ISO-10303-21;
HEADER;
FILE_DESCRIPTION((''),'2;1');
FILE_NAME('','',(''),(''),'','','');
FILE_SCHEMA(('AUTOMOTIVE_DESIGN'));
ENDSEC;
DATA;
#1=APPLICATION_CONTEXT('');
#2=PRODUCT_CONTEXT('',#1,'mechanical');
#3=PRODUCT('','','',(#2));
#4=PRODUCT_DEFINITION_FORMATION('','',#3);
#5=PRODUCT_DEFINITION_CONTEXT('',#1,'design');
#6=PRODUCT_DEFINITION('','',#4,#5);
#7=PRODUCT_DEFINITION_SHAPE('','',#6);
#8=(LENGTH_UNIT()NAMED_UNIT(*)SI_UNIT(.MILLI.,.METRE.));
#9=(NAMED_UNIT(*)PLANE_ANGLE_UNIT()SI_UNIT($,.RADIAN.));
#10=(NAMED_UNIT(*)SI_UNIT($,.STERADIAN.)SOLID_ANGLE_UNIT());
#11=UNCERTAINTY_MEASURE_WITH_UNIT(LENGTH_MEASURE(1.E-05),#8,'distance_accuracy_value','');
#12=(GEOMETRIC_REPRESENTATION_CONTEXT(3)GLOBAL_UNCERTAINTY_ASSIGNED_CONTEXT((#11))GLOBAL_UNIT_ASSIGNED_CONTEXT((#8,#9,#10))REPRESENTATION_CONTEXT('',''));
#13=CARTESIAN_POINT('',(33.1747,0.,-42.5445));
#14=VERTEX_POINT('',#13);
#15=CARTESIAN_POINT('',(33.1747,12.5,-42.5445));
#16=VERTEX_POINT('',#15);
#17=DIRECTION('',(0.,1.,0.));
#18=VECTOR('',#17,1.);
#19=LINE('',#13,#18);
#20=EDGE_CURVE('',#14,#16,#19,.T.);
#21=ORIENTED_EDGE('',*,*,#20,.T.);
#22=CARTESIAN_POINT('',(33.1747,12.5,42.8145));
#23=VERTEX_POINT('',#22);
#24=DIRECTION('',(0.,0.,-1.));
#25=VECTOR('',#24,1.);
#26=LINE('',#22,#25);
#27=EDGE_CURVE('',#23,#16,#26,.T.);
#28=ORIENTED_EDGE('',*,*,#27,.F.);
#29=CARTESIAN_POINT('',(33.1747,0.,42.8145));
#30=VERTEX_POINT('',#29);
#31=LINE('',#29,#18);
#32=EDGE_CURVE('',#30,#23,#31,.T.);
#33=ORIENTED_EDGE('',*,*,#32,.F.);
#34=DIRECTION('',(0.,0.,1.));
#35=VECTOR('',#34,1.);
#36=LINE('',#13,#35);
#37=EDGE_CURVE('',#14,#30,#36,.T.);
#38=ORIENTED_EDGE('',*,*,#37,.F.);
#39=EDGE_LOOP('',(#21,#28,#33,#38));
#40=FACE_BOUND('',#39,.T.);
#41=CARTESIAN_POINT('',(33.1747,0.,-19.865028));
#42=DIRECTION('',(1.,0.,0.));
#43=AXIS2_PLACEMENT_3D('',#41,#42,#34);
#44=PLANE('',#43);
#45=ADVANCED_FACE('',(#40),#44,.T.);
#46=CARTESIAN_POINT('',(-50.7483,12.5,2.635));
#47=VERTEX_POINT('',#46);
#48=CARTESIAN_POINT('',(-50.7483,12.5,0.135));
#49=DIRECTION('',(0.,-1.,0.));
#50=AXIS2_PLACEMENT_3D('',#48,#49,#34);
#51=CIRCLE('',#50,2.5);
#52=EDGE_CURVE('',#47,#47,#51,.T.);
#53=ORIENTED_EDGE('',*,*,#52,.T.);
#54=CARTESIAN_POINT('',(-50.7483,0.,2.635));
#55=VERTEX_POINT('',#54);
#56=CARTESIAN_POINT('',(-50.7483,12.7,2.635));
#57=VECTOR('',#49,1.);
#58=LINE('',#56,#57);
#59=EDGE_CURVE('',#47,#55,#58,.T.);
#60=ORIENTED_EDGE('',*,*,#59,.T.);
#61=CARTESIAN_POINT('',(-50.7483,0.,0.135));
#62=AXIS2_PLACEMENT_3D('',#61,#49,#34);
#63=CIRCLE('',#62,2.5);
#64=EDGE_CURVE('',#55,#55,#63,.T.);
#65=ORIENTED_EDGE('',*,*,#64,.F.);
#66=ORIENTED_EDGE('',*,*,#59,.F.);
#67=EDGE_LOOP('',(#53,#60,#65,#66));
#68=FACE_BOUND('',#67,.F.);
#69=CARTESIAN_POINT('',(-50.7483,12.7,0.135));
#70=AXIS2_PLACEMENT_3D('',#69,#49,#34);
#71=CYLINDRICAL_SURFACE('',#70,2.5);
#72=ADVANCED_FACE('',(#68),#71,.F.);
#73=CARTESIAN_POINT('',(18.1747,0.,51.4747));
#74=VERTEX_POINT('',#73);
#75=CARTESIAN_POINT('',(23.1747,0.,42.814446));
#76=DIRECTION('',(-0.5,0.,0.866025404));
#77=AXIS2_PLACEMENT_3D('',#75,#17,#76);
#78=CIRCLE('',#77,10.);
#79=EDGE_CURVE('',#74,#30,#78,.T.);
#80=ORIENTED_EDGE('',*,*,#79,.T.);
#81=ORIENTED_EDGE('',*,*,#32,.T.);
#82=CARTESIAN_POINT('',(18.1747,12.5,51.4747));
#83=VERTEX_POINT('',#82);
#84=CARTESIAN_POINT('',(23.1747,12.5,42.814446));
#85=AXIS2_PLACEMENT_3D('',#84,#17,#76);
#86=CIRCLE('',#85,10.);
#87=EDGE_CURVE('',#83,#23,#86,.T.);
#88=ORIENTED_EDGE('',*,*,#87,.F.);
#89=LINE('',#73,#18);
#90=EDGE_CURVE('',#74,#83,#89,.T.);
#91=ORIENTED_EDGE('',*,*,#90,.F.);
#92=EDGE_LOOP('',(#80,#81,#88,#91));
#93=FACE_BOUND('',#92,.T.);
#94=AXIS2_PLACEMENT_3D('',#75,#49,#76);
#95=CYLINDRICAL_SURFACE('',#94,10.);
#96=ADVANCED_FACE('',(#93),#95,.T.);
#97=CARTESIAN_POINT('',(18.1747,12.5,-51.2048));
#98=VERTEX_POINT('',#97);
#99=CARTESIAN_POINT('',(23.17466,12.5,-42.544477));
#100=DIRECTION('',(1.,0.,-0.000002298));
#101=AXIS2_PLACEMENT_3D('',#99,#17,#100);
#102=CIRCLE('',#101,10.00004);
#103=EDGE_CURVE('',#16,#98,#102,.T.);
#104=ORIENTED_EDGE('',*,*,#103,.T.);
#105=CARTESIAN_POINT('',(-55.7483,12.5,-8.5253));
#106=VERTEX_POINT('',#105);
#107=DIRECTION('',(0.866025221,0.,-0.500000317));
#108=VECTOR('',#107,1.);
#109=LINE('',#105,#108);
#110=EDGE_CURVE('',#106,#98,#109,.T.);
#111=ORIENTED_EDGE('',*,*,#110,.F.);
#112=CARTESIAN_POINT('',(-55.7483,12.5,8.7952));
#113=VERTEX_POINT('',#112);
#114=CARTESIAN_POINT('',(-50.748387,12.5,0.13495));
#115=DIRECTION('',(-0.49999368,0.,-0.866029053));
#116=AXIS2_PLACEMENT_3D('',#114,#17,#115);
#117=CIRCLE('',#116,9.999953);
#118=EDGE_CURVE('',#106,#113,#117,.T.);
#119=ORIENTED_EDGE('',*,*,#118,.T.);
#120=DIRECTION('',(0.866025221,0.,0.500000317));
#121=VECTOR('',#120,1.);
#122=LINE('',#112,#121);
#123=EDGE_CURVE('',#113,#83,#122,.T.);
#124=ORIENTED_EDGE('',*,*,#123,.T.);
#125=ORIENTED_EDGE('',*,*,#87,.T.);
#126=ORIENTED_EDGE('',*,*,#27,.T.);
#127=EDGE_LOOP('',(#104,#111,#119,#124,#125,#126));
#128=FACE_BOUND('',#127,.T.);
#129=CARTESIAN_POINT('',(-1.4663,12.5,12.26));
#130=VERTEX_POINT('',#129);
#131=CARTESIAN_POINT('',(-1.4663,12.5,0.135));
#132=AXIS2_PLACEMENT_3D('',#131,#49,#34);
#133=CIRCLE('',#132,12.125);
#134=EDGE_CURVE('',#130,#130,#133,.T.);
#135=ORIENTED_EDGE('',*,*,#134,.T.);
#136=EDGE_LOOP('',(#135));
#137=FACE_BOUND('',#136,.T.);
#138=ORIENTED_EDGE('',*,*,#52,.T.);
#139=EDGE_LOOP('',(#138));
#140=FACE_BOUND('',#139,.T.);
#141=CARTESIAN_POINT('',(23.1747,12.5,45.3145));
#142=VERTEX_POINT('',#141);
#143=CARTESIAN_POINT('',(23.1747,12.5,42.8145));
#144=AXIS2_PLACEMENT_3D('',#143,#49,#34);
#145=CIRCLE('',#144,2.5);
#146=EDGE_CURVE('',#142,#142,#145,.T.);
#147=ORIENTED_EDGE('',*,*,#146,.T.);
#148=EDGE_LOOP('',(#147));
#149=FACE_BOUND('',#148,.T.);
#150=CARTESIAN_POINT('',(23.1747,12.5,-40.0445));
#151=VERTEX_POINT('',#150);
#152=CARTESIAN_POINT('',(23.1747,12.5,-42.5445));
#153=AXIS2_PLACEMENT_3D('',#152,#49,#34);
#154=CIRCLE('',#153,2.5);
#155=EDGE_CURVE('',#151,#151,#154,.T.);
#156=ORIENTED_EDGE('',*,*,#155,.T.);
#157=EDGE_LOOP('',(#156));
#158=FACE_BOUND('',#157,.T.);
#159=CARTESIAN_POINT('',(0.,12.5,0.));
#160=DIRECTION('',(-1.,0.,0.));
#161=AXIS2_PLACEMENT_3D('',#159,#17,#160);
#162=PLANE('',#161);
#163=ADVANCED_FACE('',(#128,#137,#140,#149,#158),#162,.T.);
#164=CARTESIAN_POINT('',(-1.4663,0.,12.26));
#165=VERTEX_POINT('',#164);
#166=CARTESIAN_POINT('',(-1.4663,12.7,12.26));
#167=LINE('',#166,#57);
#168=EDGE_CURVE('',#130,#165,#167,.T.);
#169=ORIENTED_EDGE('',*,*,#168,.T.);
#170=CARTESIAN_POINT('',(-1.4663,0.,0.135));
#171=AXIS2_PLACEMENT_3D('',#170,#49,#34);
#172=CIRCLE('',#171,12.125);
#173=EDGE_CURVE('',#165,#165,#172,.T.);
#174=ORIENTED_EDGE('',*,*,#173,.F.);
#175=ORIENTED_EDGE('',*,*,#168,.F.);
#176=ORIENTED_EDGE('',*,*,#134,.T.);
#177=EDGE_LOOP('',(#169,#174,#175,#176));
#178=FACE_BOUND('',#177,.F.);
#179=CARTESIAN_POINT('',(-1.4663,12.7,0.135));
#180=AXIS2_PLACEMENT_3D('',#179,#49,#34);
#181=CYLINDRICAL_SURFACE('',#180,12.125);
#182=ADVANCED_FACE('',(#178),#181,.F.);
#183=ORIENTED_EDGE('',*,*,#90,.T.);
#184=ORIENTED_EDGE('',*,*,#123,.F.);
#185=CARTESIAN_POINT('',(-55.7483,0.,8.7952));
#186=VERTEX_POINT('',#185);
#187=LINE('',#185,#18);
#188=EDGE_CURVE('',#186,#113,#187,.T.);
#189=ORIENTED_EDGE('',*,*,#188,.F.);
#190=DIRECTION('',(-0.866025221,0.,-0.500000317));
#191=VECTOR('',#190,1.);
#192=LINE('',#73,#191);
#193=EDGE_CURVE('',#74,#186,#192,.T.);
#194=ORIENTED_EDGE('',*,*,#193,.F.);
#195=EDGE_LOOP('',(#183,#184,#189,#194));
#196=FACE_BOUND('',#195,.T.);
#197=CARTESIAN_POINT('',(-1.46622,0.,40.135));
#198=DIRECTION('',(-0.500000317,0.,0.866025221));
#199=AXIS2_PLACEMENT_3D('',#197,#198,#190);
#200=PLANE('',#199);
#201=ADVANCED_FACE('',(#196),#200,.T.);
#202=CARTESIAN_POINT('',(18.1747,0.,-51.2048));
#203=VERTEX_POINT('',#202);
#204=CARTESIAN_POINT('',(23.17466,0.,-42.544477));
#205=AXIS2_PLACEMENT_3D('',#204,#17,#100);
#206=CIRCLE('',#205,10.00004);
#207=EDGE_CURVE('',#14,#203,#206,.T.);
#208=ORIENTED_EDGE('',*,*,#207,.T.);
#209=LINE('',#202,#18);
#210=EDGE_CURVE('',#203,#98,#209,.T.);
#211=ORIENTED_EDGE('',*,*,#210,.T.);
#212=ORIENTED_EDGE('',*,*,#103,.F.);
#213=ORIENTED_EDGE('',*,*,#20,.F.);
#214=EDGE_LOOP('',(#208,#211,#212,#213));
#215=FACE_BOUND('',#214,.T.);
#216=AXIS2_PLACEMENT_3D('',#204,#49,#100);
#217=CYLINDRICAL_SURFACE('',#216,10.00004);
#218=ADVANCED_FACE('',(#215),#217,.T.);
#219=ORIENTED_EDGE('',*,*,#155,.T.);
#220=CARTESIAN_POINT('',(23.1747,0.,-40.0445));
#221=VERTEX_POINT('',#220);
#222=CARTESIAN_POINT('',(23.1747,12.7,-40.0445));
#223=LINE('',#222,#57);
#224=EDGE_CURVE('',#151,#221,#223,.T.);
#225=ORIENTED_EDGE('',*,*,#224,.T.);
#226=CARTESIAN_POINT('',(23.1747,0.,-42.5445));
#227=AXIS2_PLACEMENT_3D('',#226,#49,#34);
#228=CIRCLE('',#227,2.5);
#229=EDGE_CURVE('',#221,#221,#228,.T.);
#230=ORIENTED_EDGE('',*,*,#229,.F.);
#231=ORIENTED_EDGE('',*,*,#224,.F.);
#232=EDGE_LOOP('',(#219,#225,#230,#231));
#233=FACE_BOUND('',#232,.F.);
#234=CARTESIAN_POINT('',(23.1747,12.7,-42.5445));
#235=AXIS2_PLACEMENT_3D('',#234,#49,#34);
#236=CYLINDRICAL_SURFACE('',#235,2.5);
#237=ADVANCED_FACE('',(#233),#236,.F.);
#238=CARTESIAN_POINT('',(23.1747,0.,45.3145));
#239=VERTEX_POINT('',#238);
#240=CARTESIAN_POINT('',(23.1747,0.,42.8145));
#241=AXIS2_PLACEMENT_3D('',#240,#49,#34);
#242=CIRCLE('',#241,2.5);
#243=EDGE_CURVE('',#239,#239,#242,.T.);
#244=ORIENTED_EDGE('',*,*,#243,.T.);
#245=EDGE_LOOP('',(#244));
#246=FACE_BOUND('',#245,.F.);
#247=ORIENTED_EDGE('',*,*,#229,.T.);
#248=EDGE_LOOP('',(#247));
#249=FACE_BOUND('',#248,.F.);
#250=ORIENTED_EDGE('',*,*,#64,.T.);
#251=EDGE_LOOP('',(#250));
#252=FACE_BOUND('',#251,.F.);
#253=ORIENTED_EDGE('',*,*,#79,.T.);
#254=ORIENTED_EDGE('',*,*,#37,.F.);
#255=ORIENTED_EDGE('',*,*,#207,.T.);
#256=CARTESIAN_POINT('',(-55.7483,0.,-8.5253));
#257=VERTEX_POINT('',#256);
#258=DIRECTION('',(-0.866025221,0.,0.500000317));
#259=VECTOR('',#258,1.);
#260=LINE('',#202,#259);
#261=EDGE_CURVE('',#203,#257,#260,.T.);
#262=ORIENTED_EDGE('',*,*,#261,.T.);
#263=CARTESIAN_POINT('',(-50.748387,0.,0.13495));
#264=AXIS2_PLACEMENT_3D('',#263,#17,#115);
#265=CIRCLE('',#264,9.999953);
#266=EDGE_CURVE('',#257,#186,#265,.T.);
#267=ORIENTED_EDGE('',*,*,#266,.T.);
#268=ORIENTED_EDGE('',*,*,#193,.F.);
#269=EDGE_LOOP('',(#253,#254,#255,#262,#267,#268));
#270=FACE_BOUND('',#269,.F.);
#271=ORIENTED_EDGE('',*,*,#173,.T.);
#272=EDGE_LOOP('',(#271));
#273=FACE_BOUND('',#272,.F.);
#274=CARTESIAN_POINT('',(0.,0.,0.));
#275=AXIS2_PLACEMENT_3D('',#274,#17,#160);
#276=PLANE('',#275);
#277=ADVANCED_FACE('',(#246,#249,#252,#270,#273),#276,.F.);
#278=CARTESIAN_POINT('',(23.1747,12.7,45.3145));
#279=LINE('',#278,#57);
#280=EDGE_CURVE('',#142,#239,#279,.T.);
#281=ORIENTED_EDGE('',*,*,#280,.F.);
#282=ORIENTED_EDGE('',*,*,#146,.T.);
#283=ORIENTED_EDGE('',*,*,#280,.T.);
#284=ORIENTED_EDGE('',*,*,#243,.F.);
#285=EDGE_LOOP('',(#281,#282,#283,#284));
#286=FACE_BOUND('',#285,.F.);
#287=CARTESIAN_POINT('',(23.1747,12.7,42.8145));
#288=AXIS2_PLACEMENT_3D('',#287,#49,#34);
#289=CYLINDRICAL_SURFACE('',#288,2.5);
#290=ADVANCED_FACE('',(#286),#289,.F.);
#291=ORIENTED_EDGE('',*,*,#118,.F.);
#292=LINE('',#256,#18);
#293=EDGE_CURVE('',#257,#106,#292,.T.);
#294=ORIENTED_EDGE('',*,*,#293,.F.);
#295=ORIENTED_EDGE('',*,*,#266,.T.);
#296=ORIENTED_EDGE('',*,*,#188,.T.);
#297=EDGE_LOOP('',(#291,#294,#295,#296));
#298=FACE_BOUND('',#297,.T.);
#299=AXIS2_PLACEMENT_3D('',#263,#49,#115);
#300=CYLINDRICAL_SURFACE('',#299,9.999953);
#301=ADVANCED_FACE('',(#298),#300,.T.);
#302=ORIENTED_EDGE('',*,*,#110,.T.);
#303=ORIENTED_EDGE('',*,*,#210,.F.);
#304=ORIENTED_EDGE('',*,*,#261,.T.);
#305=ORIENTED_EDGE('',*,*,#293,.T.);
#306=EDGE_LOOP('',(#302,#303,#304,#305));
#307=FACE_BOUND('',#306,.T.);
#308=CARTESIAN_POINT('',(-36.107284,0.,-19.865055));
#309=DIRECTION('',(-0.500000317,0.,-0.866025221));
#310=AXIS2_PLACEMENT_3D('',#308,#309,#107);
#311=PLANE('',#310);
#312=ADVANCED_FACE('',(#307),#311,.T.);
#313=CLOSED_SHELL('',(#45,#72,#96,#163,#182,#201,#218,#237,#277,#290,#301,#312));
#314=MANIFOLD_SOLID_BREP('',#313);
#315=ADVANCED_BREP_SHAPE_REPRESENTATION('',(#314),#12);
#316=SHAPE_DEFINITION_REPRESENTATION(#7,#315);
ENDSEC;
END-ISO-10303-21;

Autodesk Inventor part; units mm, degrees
ref_plane "YZ Plane" through (0, 0, 0) normal (1, 0, 0) x (0, 1, 0)
ref_plane "XZ Plane" through (0, 0, 0) normal (0, 1, 0) x (-1, 0, 0)
sketch "Sketch1" plane through (0, 0, 0) normal (0, 1, 0) x (-1, 0, 0)
  circle A0 centre (1.4663, 0.135) radius 40 projected
  circle A1 centre (1.4663, 0.135) radius 60 projected
  line L0 (55.7483, -8.5253) -> (-18.1747, -51.2048)
  line L1 (-33.1747, -42.5445) -> (-33.1747, 42.8145)
  line L2 (-18.1747, 51.4747) -> (55.7483, 8.7952)
  arc A2 (55.7483, -8.5253) -> (55.7483, 8.7952) centre (50.7483, 0.135) ccw
  arc A3 (-33.1747, -42.5445) -> (-18.1747, -51.2048) centre (-23.1747, -42.5445) ccw
  arc A4 (-18.1747, 51.4747) -> (-33.1747, 42.8145) centre (-23.1747, 42.8145) ccw
  point P0 (70.7483, 0.135)
  point P1 (-33.1747, -59.865)
  point P2 (-33.1747, 60.135)
  dimension "d2" = 120
  dimension "d3" = 10
extrude "Extrusion1" add sketch "Sketch1" along normal blind 12.7 contours A0 L0 L1 L2 | A0 L2 A2 L0 | A0 L1 A4 L2 | L0 A3 L1 A0
sketch "Sketch4" plane through (0, 0, 0) normal (0, -1, 0) x (1, 0, 0)
  line L0 (-55.7483, -8.5253) -> (18.1747, -51.2048) projected
  arc A0 (18.1747, -51.2048) -> (33.1747, -42.5445) centre (23.1747, -42.5445) ccw projected
  line L1 (33.1747, -42.5445) -> (33.1747, 42.8145) projected
  arc A1 (33.1747, 42.8145) -> (18.1747, 51.4747) centre (23.1747, 42.8145) ccw projected
  line L2 (18.1747, 51.4747) -> (-55.7483, 8.7952) projected
  arc A2 (-55.7483, 8.7952) -> (-55.7483, -8.5253) centre (-50.7483, 0.135) ccw projected
  point P0 (0, 0)
ref_plane "Work Plane1" through (-50.7483, 0, 0.135) normal (1, 0, 0) x (0, 0, -1)
sketch "Sketch6" plane through (0, 12.7, 0) normal (0, 1, 0) x (1, 0, 0)
  line L0 (18.1747, 51.2048) -> (-55.7483, 8.5253) projected
  arc A0 (-55.7483, 8.5253) -> (-55.7483, -8.7952) centre (-50.7483, -0.135) ccw projected
  line L1 (-55.7483, -8.7952) -> (18.1747, -51.4747) projected
  arc A1 (18.1747, -51.4747) -> (33.1747, -42.8145) centre (23.1747, -42.8145) ccw projected
  line L2 (33.1747, -42.8145) -> (33.1747, 42.5445) projected
  arc A2 (33.1747, 42.5445) -> (18.1747, 51.2048) centre (23.1747, 42.5445) ccw projected
  line L3 (23.1747, 42.5445) -> (23.1747, -42.8145) construction
  circle A3 centre (-50.7483, -0.135) radius 1.5 construction
  line L4 (-50.7483, -0.135) -> (23.1747, -0.135) construction
  line L5 (23.1747, 42.5445) -> (-50.7483, -0.135) construction
  line L6 (23.1747, -42.8145) -> (-13.7868, 21.2048) construction
  line L7 (-50.7483, -0.135) -> (23.1747, -42.8145) construction
  line L8 (23.1747, 42.5445) -> (-13.7868, -21.4747) construction
  circle A4 centre (-1.4663, -0.135) radius 17.5
  point P0 (0, 0)
  dimension "d38" = 35
hole "Hole1" at (-1.4663, 12.7, 0.135) direction (0, -1, 0) diameter 24.25 end through all
hole "Hole2" at (-50.7483, 12.7, 0.135) at (23.1747, 12.7, 42.8145) at (23.1747, 12.7, -42.5445) direction (0, -1, 0) diameter 5 end through all
thread "Thread1" size "M6x1" class "6H" standard "ANSI Metric M Profile" full length
thread "Thread2" size "M6x1" class "6H" standard "ANSI Metric M Profile" full length
thread "Thread3" size "M6x1" class "6H" standard "ANSI Metric M Profile" full length
thicken "Thicken1" operation add thickness 0.2 both sides no extend neighbours yes toward (0, -1, 0) faces at (25.6399, 12.7, 0.6222)
thread "Thread4" size "M25x2" class "6H" standard "ISO Metric profile" full length
properties part number "Triangle_RK" material "white material"
